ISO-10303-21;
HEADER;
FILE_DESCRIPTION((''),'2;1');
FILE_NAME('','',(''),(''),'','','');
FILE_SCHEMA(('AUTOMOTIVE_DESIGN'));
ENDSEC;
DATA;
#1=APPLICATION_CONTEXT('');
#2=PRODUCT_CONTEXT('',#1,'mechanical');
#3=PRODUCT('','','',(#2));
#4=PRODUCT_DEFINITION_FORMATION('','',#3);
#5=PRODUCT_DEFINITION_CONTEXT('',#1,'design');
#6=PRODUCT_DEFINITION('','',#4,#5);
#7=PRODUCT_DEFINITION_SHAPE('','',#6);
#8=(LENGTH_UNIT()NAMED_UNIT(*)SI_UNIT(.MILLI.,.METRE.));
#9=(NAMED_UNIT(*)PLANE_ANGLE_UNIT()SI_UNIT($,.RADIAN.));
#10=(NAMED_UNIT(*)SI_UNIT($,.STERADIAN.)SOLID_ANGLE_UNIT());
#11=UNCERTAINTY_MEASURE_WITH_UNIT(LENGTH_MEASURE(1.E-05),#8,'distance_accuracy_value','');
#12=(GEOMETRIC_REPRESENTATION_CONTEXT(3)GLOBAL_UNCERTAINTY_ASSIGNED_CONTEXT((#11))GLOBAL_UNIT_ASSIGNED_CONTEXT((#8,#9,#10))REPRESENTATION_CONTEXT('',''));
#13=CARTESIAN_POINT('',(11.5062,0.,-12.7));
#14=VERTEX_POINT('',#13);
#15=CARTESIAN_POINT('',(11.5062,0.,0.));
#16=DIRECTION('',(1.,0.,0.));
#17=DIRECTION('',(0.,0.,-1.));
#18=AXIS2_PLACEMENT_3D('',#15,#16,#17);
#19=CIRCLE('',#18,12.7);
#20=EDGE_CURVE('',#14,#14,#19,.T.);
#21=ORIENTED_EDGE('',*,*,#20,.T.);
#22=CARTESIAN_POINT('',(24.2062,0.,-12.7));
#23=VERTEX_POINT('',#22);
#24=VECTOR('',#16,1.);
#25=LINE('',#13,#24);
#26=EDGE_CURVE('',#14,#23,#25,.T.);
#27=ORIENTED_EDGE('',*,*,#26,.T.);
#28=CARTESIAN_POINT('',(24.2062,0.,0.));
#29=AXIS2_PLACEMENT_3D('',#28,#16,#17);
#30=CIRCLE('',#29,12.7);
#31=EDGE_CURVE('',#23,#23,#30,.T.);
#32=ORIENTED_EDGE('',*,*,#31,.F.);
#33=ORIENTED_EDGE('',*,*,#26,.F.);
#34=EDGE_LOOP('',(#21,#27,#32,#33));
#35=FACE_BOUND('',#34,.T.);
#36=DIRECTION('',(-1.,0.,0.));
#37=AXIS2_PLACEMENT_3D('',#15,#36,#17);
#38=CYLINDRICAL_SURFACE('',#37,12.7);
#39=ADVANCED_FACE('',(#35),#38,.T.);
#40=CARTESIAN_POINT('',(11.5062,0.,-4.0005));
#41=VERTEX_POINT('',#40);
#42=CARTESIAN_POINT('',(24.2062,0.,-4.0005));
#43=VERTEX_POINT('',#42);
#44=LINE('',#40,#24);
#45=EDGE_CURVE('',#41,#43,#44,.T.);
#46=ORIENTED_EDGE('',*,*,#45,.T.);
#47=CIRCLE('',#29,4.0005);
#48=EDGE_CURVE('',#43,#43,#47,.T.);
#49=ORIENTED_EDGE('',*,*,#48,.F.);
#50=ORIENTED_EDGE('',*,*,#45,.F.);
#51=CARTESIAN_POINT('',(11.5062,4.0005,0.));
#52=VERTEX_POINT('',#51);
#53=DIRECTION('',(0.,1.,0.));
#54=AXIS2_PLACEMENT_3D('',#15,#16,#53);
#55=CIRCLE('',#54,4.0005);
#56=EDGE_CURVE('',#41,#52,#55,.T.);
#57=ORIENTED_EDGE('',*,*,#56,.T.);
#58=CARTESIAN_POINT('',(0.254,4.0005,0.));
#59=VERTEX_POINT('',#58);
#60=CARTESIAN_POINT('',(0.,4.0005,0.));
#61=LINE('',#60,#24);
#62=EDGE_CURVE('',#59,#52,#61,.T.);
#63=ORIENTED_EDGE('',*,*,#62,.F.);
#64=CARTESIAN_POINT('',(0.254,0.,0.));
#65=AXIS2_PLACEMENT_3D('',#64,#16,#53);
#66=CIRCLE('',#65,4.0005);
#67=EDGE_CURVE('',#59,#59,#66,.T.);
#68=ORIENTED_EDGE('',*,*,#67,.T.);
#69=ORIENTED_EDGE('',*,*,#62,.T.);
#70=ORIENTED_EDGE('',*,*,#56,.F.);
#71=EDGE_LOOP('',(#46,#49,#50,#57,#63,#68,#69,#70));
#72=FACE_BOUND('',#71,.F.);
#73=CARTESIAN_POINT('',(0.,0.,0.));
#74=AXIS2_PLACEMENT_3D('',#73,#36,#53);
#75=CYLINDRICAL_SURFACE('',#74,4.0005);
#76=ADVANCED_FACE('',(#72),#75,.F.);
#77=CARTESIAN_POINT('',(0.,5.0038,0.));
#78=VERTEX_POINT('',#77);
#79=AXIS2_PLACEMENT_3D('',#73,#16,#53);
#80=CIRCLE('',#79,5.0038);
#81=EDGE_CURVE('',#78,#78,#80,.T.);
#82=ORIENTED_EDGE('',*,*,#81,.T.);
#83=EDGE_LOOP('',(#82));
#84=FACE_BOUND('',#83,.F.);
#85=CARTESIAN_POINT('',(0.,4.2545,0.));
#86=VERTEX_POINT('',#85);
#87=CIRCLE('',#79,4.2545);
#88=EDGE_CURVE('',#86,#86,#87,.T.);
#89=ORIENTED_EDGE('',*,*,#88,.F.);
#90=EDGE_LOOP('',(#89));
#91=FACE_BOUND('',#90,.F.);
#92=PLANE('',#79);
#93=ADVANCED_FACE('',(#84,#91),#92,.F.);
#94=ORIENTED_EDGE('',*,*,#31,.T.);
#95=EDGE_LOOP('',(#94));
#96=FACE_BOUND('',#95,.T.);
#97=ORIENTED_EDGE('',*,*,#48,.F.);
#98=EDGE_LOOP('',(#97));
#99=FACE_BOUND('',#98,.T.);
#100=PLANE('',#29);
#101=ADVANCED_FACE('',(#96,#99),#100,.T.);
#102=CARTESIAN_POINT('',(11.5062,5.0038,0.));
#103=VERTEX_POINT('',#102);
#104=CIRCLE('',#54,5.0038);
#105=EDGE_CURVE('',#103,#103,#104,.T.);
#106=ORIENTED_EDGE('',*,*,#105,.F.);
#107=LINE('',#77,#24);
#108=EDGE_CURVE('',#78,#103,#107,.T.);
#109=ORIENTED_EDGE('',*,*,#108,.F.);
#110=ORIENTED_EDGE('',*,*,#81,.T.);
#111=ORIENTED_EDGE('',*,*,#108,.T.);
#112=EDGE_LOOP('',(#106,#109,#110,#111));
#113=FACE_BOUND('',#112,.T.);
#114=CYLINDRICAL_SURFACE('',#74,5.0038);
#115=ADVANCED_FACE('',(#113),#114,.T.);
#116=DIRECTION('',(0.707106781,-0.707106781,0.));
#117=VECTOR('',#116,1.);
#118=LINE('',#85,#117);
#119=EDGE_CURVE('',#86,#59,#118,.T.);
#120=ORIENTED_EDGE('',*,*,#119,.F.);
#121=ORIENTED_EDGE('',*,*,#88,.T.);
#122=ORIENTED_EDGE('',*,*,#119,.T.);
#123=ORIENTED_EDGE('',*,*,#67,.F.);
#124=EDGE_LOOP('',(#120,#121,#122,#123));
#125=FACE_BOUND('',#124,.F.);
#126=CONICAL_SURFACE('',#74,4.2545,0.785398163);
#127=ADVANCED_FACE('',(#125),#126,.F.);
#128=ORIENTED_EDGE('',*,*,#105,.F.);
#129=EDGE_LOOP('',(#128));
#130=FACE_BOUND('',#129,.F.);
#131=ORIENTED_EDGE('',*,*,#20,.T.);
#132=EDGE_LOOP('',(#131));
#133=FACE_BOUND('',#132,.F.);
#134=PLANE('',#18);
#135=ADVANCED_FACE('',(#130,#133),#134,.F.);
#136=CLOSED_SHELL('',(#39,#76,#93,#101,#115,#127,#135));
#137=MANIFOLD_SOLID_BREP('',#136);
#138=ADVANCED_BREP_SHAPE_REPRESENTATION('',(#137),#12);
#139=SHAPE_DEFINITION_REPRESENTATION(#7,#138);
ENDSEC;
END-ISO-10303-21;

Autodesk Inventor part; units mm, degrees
ref_plane "YZ Plane" through (0, 0, 0) normal (1, 0, 0) x (0, 1, 0)
ref_plane "XZ Plane" through (0, 0, 0) normal (0, 1, 0) x (-1, 0, 0)
ref_plane "XY Plane" through (0, 0, 0) normal (0, 0, 1) x (1, 0, 0)
sketch "Sketch1" plane through (0, 0, 0) normal (1, 0, 0) x (0, 1, 0)
  circle A0 centre (0, 0) radius 5.0038
  circle A1 centre (0, 0) radius 4.0005
  dimension "d0" = 10.0076
  dimension "d1" = 8.001
extrude "Extrusion1" add sketch "Sketch1" along normal blind 11.5062
sketch "Sketch2" plane through (11.5062, 0, 0) normal (1, 0, 0) x (0, 0, -1)
  circle A0 centre (0, 0) radius 12.7
  circle A1 centre (0, 0) radius 4.0005
  dimension "d4" = 25.4
  dimension "d7" = 8.001
extrude "Extrusion2" add sketch "Sketch2" along normal blind 12.7
chamfer "Chamfer2" distance 0.254 angle 45 1 edges at (0, -4.0005, 0)
properties part number "DTR-2"
